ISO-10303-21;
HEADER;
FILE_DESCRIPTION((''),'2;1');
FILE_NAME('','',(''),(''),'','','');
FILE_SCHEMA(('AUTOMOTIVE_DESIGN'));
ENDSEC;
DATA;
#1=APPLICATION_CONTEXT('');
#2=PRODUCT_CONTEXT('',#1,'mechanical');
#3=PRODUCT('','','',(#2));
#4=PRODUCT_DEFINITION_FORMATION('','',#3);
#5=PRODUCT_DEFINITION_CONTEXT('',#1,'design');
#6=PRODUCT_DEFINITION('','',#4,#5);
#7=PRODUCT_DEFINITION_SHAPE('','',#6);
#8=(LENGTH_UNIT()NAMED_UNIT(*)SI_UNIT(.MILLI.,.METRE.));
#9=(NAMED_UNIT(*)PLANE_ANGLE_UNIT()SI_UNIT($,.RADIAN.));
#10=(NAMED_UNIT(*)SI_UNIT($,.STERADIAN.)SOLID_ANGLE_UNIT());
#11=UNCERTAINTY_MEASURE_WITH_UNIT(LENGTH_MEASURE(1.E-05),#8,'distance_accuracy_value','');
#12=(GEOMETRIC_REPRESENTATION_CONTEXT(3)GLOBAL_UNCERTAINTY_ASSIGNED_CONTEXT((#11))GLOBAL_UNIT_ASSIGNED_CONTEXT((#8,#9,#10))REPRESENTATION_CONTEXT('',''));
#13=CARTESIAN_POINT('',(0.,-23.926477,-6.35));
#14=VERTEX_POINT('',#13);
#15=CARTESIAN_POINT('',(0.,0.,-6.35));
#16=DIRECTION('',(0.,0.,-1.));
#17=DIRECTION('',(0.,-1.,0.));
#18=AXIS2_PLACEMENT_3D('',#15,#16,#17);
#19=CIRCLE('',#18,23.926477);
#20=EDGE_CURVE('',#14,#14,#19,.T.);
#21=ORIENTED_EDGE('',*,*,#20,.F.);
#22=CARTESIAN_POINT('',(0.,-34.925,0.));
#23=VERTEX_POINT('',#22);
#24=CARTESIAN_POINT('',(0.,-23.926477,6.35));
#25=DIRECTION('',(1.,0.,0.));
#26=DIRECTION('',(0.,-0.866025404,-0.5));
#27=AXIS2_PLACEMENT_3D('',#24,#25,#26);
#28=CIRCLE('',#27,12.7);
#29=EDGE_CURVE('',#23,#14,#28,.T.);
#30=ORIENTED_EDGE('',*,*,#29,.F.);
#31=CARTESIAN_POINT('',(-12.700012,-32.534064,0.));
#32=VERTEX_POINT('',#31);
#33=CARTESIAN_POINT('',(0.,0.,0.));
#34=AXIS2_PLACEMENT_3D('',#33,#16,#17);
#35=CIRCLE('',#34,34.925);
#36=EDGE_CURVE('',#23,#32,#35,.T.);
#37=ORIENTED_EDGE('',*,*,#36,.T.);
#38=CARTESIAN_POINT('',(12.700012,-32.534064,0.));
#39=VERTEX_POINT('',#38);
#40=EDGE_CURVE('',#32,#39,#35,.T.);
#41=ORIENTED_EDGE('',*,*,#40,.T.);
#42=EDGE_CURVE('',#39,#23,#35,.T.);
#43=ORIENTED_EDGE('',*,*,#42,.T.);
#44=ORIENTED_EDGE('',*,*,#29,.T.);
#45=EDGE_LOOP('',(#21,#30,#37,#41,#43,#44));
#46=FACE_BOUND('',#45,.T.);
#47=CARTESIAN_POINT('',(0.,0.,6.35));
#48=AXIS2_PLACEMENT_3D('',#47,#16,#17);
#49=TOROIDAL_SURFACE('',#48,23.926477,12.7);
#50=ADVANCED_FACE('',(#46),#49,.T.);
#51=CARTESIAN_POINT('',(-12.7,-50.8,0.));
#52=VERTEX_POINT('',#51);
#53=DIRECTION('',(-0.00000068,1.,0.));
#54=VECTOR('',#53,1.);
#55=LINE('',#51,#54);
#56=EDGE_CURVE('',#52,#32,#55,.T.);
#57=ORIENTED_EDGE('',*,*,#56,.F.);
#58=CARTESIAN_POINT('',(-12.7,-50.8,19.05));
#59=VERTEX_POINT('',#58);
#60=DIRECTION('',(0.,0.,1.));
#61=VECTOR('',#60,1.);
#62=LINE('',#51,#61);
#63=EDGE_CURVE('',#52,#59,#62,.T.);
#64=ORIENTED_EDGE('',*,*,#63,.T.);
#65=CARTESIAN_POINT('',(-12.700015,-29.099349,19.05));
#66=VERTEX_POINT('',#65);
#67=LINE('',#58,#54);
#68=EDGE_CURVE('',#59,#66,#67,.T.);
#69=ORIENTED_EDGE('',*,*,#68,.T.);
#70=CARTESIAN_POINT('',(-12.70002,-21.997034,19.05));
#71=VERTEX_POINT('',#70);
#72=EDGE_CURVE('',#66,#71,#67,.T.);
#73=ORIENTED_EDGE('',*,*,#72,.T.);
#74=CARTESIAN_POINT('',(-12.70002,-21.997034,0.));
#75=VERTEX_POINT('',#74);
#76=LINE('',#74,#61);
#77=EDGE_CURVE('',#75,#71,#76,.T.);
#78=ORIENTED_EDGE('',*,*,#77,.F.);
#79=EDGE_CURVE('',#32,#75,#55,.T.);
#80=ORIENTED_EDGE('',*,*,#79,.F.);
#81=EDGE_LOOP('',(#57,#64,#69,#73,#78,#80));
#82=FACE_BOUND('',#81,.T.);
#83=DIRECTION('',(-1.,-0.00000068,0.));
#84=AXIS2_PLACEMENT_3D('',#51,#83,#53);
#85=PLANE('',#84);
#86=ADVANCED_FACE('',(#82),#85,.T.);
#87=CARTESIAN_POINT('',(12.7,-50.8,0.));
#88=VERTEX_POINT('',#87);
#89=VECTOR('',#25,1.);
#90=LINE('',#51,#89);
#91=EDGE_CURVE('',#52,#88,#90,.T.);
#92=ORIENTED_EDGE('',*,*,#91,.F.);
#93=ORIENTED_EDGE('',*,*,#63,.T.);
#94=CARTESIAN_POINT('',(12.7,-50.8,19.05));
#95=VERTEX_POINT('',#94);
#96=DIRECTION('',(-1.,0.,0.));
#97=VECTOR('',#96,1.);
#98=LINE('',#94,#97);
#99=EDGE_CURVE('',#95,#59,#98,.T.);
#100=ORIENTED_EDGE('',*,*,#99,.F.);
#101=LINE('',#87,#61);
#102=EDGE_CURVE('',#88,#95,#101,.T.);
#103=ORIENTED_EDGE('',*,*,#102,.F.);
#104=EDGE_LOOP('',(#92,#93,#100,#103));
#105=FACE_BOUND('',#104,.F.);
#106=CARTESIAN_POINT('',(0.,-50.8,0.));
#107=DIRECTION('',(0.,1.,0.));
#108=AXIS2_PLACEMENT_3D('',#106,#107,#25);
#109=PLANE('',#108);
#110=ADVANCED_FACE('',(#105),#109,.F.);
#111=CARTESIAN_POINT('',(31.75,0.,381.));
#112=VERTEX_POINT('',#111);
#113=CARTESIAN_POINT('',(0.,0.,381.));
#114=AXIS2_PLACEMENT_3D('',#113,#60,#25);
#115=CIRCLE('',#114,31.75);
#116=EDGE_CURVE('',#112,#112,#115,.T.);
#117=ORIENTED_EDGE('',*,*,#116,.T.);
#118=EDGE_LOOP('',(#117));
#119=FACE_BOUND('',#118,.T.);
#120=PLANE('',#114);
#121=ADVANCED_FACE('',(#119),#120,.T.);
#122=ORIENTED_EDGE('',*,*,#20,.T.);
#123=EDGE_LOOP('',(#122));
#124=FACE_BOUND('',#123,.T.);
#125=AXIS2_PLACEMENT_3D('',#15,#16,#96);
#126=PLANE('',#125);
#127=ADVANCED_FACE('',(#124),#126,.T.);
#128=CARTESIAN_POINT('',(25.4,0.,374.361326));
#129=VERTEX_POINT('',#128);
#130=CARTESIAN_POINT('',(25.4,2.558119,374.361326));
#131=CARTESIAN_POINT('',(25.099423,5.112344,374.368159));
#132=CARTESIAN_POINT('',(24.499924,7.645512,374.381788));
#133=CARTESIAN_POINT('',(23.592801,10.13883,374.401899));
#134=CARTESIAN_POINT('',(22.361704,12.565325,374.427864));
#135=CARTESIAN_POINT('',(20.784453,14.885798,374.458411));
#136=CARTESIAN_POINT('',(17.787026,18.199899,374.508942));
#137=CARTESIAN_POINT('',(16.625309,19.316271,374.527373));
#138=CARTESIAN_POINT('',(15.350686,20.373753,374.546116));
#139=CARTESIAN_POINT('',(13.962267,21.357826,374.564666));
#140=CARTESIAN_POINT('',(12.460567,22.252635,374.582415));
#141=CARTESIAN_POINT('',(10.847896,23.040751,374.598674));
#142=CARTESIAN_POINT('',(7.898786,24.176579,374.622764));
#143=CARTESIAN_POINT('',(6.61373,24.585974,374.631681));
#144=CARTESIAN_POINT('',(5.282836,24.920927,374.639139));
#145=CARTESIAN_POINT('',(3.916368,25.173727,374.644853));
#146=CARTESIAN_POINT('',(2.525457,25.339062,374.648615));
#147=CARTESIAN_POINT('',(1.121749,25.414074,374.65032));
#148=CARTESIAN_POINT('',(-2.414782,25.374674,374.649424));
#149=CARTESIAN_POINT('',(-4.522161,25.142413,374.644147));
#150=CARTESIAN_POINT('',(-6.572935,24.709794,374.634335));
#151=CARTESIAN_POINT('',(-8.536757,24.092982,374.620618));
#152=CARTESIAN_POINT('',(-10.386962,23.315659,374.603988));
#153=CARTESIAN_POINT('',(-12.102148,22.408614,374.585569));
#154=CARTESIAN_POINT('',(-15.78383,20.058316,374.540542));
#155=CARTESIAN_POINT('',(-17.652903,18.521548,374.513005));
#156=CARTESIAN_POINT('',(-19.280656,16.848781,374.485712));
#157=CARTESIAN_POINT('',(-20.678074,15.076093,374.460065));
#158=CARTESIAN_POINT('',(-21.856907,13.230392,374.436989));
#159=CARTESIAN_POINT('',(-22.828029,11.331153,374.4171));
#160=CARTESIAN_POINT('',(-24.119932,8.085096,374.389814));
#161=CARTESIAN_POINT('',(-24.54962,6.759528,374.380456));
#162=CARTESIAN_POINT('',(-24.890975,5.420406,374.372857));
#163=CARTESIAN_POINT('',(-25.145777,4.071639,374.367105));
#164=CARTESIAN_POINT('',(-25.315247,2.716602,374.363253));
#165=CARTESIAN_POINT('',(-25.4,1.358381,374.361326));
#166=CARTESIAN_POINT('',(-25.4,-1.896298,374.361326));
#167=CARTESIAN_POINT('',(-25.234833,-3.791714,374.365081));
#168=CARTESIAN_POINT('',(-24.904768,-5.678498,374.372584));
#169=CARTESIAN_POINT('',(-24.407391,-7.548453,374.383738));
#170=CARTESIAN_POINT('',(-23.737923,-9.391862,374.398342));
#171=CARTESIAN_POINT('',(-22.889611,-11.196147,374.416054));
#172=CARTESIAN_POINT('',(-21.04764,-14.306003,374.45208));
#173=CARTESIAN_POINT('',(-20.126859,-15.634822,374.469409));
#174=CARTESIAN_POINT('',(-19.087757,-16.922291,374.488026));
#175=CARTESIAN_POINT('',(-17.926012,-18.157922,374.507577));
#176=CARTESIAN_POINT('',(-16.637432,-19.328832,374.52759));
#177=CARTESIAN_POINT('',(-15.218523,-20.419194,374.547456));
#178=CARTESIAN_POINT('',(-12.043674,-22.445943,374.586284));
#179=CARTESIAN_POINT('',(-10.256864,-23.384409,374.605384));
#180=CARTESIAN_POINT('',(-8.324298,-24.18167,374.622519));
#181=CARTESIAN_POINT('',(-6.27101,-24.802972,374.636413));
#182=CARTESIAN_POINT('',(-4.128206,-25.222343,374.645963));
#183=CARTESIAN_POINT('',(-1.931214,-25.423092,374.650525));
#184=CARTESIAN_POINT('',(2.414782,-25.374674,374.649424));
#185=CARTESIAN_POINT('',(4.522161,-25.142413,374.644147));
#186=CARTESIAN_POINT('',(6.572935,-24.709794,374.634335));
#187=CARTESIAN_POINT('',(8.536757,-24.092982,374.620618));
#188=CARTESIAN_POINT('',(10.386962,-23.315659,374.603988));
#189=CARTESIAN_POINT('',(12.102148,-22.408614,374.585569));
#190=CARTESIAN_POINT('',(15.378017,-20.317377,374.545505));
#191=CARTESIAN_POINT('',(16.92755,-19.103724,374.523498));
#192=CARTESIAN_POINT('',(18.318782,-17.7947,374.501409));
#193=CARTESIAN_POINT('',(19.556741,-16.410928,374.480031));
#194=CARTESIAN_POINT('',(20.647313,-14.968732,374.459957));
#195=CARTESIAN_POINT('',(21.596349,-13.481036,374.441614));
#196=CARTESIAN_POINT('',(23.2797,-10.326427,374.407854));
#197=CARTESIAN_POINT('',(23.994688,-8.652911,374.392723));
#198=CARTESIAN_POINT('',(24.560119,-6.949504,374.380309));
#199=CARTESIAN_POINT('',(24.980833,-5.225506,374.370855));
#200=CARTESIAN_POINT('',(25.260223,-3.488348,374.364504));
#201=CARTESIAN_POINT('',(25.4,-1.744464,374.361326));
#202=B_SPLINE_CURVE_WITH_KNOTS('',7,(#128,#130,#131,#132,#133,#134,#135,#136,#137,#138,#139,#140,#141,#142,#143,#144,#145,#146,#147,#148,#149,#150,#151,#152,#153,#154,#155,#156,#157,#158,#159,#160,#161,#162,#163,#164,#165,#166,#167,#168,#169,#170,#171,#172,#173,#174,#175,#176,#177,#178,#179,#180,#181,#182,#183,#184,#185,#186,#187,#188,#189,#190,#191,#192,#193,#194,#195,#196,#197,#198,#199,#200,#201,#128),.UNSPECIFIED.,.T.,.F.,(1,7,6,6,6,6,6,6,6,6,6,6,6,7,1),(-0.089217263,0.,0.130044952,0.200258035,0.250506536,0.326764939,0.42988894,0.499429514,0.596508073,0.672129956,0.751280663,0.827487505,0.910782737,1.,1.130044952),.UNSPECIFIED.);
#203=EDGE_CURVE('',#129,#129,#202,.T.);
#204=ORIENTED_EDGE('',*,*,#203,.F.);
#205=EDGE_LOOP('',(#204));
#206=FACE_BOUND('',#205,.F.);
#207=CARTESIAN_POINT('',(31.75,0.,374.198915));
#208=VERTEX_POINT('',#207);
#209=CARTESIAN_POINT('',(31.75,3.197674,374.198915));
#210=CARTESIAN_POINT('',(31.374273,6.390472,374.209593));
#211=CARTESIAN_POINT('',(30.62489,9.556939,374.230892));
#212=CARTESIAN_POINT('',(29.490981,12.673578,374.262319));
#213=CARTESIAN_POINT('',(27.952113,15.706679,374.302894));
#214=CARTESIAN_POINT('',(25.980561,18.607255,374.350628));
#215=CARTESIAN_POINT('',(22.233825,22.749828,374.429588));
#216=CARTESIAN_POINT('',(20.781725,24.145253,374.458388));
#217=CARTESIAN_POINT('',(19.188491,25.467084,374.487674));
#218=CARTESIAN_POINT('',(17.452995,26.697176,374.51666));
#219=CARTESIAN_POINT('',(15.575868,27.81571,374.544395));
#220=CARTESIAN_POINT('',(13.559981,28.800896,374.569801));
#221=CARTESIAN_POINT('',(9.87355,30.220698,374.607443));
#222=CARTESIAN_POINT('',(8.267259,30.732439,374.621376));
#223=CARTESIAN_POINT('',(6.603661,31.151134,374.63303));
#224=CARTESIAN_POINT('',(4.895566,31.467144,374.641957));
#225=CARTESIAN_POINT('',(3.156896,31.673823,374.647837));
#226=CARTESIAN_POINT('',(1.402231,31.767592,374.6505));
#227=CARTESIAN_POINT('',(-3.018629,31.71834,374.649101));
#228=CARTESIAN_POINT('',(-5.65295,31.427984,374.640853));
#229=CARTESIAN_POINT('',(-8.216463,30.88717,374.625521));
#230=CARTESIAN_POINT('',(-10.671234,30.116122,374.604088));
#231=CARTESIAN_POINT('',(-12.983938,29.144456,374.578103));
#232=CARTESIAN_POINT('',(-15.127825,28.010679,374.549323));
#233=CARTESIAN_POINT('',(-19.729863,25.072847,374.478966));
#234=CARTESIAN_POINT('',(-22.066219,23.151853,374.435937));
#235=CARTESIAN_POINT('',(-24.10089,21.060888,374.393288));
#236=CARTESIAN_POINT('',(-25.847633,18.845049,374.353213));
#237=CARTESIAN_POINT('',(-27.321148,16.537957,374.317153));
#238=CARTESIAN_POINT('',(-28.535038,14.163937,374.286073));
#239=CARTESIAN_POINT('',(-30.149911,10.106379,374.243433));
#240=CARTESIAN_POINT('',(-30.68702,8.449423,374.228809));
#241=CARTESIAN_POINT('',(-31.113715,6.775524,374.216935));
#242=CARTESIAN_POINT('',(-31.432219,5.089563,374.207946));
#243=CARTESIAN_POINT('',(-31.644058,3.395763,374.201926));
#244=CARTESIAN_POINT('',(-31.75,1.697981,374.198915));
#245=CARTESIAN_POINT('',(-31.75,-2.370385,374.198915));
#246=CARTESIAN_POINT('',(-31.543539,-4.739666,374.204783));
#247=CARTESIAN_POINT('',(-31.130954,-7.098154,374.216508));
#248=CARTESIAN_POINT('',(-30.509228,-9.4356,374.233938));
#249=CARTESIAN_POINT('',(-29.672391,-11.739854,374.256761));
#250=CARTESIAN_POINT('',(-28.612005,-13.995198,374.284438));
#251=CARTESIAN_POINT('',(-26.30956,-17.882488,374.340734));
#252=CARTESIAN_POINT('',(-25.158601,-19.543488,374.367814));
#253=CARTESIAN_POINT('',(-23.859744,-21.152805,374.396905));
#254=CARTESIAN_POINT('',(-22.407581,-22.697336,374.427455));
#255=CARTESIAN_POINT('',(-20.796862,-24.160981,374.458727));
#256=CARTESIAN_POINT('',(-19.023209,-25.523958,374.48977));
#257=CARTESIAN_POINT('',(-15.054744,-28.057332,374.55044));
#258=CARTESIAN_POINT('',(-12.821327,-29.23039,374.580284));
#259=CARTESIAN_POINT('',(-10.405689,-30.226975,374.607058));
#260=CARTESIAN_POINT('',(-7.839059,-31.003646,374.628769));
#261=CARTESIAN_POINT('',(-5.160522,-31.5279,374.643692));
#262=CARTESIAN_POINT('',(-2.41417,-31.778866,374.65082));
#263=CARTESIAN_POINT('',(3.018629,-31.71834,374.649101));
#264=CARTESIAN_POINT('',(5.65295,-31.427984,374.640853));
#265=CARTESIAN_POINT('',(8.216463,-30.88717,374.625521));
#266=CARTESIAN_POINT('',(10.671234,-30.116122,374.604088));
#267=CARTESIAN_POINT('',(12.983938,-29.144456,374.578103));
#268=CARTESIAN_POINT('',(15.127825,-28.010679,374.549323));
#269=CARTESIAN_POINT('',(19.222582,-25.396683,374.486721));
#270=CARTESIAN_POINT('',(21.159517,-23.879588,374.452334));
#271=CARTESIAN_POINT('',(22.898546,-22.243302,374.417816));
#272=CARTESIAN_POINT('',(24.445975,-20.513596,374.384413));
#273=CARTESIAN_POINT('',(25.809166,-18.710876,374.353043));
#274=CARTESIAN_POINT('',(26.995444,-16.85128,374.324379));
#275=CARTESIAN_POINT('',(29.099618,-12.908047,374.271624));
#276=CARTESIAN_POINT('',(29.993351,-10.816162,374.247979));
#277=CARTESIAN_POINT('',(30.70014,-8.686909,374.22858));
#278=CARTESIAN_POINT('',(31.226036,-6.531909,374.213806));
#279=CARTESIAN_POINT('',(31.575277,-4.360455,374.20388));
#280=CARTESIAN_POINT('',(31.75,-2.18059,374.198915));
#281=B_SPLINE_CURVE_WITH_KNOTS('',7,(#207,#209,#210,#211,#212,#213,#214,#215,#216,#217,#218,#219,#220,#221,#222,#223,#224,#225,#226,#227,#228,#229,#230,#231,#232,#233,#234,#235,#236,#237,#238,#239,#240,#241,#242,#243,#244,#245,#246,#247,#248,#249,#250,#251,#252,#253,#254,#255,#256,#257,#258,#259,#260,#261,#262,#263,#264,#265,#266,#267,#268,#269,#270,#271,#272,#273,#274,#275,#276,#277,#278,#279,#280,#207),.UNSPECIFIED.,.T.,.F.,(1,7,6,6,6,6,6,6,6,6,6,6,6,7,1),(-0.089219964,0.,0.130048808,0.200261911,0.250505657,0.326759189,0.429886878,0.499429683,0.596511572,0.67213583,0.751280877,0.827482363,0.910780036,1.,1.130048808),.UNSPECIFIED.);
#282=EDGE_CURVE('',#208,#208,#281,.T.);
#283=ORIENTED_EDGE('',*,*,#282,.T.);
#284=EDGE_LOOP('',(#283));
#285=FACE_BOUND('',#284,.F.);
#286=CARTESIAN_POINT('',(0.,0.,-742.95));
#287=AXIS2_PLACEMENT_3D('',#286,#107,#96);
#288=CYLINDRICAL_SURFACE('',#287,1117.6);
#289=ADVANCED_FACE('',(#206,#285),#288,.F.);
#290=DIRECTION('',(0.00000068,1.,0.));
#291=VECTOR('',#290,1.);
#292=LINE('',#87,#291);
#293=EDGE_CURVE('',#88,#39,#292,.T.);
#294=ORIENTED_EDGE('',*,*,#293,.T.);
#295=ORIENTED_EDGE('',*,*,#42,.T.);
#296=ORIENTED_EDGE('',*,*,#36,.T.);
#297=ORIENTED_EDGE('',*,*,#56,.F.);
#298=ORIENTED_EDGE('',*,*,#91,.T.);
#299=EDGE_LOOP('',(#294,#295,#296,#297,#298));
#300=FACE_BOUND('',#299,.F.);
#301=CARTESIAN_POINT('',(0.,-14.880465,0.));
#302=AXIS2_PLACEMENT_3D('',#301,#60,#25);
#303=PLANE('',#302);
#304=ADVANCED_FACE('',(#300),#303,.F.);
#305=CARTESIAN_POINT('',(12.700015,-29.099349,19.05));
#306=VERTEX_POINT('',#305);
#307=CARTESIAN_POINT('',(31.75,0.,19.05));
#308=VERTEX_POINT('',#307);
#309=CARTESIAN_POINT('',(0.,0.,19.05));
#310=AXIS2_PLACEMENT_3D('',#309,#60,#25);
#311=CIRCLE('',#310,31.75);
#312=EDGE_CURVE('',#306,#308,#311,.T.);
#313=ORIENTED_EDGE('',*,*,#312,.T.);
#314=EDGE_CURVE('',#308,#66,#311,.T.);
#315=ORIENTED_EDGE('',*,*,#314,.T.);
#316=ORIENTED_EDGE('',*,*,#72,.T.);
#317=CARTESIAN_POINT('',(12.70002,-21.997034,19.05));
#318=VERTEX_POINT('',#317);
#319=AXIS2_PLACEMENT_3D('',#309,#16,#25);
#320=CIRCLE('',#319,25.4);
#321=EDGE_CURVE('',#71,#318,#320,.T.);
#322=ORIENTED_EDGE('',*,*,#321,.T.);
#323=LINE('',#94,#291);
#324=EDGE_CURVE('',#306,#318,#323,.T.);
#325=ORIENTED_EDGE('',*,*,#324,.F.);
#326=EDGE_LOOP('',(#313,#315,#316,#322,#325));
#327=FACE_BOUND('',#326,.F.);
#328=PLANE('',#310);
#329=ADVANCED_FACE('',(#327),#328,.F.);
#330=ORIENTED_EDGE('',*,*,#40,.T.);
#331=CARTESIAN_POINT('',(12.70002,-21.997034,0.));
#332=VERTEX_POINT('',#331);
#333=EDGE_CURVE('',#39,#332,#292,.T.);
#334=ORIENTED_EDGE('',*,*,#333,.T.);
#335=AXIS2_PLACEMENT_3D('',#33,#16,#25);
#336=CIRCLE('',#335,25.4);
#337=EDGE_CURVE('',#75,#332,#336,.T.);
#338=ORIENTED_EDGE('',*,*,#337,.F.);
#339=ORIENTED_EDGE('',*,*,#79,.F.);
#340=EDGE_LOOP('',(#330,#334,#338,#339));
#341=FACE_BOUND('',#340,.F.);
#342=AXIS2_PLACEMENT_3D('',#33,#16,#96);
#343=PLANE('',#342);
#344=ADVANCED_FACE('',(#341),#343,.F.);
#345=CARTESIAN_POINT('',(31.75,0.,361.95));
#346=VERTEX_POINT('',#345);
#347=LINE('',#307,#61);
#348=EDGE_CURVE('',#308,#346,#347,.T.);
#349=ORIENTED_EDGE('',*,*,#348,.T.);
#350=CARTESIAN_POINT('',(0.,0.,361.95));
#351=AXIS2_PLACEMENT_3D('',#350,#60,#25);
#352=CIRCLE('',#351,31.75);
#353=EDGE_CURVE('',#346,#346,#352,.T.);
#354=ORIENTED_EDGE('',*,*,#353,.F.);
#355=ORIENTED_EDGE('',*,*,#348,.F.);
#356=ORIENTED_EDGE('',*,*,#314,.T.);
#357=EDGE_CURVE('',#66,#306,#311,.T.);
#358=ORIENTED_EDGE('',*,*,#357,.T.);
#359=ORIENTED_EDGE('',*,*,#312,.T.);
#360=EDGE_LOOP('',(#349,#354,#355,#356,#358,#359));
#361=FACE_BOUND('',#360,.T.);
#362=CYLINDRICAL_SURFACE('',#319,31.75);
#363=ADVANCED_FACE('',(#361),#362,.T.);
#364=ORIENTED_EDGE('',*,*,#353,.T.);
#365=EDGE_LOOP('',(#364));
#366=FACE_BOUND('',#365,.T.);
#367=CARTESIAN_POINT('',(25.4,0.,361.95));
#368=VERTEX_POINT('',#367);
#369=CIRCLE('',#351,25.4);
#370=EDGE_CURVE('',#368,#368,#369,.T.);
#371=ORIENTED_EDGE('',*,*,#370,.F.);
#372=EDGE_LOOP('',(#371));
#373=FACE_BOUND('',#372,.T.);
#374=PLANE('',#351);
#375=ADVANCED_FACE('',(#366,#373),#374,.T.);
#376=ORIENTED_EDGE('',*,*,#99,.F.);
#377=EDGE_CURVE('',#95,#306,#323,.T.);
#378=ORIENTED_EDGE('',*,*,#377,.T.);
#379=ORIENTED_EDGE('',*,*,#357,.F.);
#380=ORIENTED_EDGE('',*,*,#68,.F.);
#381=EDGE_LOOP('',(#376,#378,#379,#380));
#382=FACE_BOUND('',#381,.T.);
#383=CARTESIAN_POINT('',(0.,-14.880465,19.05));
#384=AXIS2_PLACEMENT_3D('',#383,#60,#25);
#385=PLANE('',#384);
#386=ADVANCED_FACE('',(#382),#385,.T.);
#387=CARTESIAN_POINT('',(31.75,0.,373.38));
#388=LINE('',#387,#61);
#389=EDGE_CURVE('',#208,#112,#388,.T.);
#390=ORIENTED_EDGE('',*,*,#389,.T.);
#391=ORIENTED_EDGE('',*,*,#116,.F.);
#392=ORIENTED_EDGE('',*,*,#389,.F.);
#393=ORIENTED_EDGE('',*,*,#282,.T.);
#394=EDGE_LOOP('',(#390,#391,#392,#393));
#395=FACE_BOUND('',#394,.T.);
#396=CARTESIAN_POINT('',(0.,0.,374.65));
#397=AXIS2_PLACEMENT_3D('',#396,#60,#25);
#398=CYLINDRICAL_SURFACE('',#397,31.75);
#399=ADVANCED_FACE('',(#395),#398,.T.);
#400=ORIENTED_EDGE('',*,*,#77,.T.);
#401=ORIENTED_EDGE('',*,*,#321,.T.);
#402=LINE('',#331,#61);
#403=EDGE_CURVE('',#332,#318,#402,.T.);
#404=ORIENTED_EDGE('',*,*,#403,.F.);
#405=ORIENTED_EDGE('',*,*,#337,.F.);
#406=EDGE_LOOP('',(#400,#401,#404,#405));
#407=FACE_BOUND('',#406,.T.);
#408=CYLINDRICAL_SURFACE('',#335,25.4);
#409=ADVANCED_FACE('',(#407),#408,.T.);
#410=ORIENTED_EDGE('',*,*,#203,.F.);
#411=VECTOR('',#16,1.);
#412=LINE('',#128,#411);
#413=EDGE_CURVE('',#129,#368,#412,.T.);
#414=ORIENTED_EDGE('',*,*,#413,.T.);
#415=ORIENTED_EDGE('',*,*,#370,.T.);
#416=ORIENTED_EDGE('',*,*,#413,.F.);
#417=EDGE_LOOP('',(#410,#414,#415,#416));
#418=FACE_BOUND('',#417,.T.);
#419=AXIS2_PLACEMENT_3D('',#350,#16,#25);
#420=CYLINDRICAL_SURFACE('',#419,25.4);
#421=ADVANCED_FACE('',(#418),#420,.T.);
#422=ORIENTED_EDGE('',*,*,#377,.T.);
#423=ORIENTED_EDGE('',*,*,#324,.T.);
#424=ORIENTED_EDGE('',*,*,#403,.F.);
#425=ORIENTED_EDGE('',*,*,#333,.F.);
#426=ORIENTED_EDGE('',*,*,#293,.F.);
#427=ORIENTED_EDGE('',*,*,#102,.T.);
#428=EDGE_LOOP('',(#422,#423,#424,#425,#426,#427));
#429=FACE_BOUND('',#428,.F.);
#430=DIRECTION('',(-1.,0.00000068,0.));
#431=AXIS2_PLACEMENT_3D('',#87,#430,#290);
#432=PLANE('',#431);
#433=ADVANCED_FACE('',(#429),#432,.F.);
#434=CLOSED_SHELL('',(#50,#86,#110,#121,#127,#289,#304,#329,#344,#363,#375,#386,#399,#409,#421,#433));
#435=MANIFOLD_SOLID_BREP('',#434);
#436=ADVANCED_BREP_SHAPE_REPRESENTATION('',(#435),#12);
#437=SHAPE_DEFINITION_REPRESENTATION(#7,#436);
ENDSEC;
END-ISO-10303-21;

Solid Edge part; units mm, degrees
sketch "Sketch1" plane through (0, 0, 0) normal (0, 0, 1) x (1, 0, 0)
  line L0 (12.7, -50.8) -> (12.7, -21.997)
  line L1 (0, -50.8) -> (12.7, -50.8)
  line L2 (0, -50.8) -> (-12.7, -50.8)
  line L3 (-12.7, -50.8) -> (-12.7, -21.997)
  arc A0 (-12.7, -21.997) -> (12.7, -21.997) centre (0, 0) cw
extrude "Protrusion1" add sketch "Sketch1" along normal blind 19.05
sketch "Sketch2" plane through (0, -12.7, 0) normal (0, 0, -1) x (0, -1, 0)
  circle A0 centre (-12.7, 0) radius 34.925
extrude "ExtrudedProtrusion_2" add sketch "Sketch2" along normal blind 6.35
fillet "Round_1" radius 12.7 1 edges at (0, 34.925, -6.35)
sketch "Sketch3" plane through (0, -12.7, 19.05) normal (0, 0, 1) x (1, 0, 0)
  circle A0 centre (0, 12.7) radius 31.75
extrude "ExtrudedProtrusion_3" add sketch "Sketch3" along normal blind 342.9
sketch "Sketch4" plane through (0, 0, 361.95) normal (0, 0, 1) x (1, 0, 0)
  circle A0 centre (0, 0) radius 25.4
extrude "ExtrudedProtrusion_4" add sketch "Sketch4" along normal blind 19.05
sketch "Sketch5" plane through (0, 0, 374.65) normal (0, 0, 1) x (1, 0, 0)
  circle A0 centre (0, 0) radius 31.75
extrude "ExtrudedProtrusion_5" add sketch "Sketch5" along normal blind 6.35 and the other way blind 1.27
sketch "Sketch6" plane through (0, 0, 374.65) normal (0, -1, 0) x (-1, 0, 0)
  line L0 (-63.5, 1.8054) -> (63.5, 1.8054)
  arc A0 (-63.5, 1.8054) -> (63.5, 1.8054) centre (0, 1117.6) ccw
extrude "Cutout1" cut sketch "Sketch6" along normal through all and the other way through all
sketch "Sketch7" plane through (0, 0, 361.95) normal (0, 0, 1) x (1, 0, 0)
  circle A0 centre (0, 0) radius 25.4
extrude "Protrusion2" add sketch "Sketch7" along normal up to vertex (19.05 mm away)
